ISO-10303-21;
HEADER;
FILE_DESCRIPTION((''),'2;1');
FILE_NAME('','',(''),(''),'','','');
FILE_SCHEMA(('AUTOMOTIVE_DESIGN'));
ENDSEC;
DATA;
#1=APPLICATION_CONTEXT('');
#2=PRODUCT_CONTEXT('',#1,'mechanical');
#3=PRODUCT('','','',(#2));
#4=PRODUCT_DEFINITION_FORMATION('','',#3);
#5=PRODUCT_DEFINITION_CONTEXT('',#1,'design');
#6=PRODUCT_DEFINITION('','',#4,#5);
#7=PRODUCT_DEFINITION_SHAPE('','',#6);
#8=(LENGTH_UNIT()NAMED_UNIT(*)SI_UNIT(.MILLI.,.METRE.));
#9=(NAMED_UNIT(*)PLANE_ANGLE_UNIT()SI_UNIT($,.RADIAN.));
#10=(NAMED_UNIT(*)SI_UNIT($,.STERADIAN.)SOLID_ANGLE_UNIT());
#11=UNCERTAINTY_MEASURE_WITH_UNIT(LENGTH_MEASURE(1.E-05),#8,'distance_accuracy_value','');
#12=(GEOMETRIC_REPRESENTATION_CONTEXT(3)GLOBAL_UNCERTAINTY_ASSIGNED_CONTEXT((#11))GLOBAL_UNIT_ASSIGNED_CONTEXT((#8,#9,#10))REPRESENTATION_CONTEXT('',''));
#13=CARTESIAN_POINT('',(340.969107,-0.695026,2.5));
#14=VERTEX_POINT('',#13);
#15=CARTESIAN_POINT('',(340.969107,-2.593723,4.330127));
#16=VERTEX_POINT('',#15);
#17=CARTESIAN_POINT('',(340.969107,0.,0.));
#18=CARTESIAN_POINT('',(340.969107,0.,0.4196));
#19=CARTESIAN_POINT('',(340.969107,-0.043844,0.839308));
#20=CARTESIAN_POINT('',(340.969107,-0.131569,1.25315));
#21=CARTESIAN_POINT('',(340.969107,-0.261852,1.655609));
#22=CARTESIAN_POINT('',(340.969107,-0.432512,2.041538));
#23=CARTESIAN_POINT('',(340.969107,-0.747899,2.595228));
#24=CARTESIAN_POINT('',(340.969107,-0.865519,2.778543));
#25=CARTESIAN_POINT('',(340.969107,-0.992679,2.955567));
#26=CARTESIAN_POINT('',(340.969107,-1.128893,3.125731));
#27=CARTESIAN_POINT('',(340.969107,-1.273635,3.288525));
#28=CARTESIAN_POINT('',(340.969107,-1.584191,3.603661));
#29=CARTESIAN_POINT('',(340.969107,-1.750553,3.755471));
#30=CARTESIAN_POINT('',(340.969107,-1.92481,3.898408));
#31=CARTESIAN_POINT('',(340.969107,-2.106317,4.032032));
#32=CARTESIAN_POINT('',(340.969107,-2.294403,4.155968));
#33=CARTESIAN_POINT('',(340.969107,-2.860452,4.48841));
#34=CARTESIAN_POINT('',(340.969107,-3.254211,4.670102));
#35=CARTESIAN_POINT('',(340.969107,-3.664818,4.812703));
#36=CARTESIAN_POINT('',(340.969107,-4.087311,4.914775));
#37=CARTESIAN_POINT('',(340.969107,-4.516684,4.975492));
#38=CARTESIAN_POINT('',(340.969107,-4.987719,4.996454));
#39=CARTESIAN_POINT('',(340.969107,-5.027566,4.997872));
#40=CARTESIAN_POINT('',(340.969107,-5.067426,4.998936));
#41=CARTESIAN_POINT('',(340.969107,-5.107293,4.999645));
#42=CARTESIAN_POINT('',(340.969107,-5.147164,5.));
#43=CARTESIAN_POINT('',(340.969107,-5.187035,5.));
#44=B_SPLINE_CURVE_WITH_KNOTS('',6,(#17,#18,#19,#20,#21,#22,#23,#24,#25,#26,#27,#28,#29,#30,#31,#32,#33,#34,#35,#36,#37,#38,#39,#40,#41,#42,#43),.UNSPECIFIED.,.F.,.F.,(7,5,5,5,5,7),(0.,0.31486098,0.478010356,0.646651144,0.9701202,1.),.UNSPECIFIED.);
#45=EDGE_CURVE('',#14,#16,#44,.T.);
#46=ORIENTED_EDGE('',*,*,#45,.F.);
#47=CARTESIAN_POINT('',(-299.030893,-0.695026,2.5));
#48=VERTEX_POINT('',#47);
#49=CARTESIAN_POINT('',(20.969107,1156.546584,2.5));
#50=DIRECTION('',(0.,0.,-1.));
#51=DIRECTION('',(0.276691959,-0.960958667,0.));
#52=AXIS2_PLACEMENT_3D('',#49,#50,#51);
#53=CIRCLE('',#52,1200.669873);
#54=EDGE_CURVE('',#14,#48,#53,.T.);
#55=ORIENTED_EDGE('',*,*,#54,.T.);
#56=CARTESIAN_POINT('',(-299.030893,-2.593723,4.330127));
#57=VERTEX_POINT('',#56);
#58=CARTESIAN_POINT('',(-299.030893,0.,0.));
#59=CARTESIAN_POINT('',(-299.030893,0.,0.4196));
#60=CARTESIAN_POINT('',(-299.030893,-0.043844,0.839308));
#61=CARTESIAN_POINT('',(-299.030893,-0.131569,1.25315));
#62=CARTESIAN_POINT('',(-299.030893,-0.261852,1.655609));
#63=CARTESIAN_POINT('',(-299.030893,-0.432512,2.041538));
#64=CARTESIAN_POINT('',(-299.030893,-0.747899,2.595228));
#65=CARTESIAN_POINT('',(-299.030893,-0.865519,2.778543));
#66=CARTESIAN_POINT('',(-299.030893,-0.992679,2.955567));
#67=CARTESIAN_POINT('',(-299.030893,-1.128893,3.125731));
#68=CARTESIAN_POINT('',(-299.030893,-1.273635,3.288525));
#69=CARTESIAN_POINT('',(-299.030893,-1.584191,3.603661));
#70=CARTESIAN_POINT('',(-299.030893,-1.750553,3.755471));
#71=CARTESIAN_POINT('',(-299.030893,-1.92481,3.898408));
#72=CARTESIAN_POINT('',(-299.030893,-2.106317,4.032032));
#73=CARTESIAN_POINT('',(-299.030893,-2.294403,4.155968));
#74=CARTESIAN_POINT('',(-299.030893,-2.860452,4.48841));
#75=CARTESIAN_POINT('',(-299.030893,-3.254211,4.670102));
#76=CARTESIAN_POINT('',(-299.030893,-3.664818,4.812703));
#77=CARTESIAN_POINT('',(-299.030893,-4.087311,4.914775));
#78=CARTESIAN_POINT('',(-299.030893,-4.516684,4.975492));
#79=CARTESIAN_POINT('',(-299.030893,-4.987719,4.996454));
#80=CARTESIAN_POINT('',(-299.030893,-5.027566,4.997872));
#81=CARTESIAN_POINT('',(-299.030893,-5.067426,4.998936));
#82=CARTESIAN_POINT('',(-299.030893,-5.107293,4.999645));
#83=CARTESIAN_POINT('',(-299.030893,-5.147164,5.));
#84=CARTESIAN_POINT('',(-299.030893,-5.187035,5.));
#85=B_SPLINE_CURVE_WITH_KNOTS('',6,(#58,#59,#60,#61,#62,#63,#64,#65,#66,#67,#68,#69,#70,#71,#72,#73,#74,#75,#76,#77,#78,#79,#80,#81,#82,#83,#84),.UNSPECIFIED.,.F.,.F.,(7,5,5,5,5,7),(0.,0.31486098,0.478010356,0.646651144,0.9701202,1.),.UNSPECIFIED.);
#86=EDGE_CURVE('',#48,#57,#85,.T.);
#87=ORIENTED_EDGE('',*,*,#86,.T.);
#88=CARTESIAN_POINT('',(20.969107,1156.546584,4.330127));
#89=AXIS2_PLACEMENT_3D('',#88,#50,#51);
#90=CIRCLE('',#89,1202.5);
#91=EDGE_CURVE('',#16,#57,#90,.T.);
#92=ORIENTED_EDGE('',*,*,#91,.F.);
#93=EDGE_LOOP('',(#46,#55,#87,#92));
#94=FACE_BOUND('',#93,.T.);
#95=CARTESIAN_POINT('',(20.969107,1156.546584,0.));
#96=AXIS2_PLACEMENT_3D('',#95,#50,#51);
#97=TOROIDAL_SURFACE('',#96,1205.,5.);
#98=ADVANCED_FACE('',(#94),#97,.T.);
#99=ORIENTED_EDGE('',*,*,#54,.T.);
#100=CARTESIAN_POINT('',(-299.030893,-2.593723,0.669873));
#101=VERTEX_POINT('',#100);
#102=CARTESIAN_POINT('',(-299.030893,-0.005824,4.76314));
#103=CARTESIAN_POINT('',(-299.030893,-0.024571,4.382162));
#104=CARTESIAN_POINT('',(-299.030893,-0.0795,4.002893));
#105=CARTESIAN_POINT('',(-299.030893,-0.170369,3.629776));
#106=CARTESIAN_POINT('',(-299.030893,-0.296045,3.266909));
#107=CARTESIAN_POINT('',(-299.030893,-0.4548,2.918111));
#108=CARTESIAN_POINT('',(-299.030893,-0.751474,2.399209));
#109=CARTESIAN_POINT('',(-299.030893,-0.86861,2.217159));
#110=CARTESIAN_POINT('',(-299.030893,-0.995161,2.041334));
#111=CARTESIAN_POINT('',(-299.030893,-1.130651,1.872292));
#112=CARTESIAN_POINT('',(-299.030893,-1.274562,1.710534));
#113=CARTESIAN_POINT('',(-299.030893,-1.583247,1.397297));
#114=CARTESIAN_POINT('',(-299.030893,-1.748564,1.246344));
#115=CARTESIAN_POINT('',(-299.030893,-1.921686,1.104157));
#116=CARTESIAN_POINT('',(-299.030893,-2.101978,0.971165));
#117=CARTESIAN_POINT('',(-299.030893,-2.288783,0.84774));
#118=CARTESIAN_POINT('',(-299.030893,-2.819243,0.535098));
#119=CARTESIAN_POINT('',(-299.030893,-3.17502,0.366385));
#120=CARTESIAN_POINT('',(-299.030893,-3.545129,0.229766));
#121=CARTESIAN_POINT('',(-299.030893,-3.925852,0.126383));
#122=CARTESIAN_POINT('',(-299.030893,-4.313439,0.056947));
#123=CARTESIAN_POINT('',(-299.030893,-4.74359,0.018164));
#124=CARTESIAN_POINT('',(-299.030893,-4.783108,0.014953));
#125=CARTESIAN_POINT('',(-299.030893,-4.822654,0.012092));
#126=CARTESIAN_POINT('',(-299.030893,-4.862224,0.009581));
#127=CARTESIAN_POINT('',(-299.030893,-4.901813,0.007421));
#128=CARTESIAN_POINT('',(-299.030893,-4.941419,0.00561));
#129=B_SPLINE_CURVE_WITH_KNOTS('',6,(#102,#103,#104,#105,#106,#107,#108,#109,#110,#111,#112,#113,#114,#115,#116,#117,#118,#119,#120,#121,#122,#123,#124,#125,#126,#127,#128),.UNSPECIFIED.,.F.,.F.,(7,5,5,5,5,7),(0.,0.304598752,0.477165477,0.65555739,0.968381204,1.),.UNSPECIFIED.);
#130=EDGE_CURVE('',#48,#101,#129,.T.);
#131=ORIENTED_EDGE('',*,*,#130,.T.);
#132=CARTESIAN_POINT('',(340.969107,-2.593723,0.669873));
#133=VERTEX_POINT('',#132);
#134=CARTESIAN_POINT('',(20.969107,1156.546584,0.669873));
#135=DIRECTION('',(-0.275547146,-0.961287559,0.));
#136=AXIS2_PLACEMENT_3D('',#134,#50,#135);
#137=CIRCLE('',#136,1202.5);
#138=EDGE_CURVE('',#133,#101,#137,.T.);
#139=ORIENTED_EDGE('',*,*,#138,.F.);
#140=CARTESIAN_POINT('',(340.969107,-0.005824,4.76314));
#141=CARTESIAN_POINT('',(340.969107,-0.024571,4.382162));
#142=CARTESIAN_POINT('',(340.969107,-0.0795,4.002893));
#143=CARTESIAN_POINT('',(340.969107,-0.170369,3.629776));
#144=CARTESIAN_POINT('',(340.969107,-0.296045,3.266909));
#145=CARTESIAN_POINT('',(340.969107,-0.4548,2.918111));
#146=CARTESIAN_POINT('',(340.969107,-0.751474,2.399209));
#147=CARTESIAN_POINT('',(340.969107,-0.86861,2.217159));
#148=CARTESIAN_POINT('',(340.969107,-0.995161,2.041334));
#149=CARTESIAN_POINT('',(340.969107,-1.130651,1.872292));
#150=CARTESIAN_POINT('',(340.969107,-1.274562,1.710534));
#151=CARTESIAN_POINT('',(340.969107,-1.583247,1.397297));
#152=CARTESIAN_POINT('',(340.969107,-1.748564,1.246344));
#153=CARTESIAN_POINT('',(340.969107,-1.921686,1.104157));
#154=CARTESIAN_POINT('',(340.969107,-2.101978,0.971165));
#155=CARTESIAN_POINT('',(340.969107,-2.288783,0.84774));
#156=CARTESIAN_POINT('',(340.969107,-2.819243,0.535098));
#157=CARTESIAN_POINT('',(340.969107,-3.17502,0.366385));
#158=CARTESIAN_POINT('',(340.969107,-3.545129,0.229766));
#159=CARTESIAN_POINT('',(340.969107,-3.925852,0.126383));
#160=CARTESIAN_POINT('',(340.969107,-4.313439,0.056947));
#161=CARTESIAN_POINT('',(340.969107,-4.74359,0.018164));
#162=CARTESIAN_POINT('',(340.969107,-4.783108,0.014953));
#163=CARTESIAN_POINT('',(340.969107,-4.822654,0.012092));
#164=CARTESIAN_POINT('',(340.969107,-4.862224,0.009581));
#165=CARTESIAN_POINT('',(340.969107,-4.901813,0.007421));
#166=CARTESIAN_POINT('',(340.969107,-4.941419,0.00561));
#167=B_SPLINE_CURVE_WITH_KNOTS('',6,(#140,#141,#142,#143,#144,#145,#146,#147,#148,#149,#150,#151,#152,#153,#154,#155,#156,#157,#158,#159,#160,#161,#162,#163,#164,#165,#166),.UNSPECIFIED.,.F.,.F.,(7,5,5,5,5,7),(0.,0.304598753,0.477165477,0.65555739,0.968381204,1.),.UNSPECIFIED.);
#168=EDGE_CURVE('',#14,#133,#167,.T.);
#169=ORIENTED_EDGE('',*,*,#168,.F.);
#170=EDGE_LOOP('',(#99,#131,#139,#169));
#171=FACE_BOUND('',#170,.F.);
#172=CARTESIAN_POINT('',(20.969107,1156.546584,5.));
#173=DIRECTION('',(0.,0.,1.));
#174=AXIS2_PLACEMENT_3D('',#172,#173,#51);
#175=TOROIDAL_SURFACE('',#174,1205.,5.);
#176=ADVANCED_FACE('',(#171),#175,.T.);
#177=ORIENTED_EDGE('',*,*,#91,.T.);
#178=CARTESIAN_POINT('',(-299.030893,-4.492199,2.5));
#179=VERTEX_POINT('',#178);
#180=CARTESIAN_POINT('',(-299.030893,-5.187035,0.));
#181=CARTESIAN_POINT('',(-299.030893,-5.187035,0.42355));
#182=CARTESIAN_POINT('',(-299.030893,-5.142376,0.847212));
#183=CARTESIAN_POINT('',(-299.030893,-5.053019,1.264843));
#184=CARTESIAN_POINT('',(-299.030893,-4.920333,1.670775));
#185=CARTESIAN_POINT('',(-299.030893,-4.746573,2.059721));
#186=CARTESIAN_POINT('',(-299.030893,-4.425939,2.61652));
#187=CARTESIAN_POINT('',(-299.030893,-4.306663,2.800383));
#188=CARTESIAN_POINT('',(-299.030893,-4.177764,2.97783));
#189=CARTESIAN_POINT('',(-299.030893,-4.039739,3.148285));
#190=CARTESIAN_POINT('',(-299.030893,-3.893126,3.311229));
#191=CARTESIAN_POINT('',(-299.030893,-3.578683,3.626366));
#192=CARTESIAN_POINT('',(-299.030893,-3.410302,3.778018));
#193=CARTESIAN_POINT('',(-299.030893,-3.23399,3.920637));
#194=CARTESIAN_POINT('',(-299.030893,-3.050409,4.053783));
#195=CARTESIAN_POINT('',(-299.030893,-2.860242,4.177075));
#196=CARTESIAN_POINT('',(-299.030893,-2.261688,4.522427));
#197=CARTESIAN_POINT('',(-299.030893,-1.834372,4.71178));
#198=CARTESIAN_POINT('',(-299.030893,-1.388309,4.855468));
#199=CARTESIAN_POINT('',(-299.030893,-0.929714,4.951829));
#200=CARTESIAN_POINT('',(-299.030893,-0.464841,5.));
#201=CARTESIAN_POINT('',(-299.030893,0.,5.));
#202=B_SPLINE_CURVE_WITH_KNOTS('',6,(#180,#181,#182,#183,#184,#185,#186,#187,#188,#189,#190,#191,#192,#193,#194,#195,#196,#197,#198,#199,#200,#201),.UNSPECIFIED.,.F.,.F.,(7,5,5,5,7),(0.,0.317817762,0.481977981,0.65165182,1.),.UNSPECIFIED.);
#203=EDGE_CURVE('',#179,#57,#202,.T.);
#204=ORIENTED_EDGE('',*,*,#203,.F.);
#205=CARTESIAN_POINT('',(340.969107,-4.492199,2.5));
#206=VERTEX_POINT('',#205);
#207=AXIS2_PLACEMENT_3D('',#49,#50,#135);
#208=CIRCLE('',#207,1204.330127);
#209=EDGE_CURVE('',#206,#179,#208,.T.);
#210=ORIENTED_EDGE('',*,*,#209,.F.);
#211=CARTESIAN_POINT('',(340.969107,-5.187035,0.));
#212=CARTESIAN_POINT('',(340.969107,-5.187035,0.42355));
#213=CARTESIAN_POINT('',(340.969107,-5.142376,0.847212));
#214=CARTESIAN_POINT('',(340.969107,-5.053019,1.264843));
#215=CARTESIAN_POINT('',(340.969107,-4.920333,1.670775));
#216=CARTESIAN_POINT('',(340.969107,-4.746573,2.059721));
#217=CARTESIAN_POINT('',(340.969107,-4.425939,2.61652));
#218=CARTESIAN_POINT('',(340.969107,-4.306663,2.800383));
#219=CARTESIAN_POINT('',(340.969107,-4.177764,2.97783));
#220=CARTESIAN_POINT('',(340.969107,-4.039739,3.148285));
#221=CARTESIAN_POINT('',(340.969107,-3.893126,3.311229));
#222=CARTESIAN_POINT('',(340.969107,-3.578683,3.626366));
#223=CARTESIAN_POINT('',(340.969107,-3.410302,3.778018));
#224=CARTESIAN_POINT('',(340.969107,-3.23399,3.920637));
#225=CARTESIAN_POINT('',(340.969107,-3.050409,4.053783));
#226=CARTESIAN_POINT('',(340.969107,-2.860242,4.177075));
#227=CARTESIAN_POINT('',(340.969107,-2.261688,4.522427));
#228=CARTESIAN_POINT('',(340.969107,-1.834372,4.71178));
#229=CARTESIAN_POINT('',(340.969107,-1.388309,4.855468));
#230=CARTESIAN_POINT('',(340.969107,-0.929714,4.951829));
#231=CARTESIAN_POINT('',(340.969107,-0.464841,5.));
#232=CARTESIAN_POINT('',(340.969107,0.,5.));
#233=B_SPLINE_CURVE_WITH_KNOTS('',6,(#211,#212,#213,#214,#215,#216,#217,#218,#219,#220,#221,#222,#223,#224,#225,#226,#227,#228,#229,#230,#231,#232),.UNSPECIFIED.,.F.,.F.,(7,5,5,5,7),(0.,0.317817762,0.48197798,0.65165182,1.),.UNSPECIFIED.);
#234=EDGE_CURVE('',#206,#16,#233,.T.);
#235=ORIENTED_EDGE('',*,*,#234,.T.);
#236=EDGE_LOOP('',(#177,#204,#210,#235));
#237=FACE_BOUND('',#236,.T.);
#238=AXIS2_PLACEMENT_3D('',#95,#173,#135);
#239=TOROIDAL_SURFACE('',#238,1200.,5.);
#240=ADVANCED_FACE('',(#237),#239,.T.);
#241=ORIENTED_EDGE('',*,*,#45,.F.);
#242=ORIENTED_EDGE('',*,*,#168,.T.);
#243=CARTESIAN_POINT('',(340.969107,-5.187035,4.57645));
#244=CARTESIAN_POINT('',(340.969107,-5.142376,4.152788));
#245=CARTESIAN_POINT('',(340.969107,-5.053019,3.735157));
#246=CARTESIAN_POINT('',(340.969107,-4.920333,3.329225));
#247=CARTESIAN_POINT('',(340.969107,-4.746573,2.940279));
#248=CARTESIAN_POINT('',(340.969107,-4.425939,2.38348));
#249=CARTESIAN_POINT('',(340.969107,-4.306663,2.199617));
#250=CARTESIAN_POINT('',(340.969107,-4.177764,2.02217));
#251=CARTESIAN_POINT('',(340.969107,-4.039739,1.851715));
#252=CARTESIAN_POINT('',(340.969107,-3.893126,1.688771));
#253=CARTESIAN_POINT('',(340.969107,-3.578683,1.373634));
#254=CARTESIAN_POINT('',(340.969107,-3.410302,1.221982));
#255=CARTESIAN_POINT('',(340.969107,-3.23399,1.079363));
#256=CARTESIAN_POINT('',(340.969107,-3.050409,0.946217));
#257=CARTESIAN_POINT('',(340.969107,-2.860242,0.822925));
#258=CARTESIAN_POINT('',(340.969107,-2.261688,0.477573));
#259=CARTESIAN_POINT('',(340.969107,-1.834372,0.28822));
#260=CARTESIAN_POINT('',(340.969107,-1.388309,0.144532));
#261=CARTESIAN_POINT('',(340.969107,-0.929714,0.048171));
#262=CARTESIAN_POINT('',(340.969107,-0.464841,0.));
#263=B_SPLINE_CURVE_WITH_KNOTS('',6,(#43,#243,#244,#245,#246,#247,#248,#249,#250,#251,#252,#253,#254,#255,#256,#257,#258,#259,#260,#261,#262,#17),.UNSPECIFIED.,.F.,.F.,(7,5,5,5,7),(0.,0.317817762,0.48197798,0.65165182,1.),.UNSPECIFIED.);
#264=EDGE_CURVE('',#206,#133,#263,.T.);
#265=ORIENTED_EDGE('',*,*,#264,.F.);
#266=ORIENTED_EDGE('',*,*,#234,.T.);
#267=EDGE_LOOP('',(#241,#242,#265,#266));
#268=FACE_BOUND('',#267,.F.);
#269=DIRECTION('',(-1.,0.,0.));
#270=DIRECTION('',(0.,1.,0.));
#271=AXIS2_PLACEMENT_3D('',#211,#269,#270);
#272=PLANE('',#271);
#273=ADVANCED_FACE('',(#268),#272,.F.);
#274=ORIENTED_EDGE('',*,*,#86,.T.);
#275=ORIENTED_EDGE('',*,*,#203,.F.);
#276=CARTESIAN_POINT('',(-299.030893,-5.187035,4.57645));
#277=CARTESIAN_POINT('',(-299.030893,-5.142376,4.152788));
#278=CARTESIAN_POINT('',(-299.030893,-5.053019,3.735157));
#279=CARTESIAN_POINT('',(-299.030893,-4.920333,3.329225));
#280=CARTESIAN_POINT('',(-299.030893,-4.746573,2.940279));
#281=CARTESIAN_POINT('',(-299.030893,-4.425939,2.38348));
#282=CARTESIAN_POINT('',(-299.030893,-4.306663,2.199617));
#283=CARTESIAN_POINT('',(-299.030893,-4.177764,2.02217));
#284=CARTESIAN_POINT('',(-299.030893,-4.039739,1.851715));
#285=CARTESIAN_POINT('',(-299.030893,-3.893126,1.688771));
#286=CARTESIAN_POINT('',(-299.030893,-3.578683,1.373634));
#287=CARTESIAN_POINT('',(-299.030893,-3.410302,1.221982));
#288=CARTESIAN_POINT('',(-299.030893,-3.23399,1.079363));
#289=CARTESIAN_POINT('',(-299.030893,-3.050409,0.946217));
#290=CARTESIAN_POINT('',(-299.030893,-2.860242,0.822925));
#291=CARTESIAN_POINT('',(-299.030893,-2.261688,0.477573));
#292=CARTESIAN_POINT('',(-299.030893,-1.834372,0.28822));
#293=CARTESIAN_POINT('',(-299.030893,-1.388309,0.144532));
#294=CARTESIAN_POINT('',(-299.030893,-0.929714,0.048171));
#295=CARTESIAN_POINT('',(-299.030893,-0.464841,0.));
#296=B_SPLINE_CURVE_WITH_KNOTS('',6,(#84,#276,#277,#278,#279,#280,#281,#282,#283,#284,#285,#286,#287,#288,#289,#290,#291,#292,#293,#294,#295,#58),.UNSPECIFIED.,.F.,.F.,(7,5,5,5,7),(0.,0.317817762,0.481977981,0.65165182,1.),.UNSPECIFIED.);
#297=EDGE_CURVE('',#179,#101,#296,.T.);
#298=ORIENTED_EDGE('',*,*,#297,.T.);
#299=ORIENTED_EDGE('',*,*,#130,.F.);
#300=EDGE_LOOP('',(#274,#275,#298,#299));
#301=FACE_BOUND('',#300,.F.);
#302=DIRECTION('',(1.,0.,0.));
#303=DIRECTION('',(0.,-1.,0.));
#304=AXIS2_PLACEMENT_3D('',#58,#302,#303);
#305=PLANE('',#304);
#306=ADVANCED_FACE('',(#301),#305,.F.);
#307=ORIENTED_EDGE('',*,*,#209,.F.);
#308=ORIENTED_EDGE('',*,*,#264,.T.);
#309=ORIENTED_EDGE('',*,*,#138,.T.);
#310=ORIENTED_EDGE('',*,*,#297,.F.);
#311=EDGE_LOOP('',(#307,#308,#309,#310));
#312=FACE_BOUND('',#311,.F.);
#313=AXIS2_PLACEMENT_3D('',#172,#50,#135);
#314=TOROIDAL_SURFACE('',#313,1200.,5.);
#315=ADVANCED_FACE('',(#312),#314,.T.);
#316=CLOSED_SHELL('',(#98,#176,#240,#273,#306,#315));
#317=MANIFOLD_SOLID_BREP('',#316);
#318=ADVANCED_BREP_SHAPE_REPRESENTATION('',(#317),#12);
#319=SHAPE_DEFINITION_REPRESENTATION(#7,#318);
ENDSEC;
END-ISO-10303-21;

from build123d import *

# Parameters (mm, degrees)
F1_DEPTH    = 5
F2_T2_ANGLE = 31.9892462311
F2_T4_ANGLE = 32.125738606
F2_T6_ANGLE = 31.9892462311
F2_T8_ANGLE = 32.125738606


# Not quite as in the source:
# - a fillet or chamfer that OpenCascade refuses, or shapes differently, is made with other operations: its cross-section is extruded or revolved along the edge and cut away or added


with BuildPart() as f1:
    # F0 (on Top) → F1 (new body)
    with BuildSketch(Plane.XY):
        with BuildLine():
            ThreePointArc((340.9691074047, 0), (20.9691074047, -43.4534164159), (-299.0308925953, 0))
            Line((-299.0308925953, 0), (-299.0308925953, -5.187034764))
            ThreePointArc((-299.0308925953, -5.187034764), (20.9691074047, -48.4534164159), (340.9691074047, -5.187034764))
            Line((340.9691074047, -5.187034764), (340.9691074047, 0))
        make_face()
    extrude(amount=F1_DEPTH)

    # F2: fillet of radius 5 on 4 edges, made by hand

    # F2_s1 → F2_t2 (revolve, cut)
    with BuildSketch(Plane(origin=(-286.9691065764, 82.2579232266, 0), x_dir=(0, 0, 1), z_dir=(-0.9612875587, 0.2755471456, 0))):
        with BuildLine():
            ThreePointArc((5, -87.4481804397), (1.4644660941, -85.9837143456), (0, -82.4481804397))
            Line((0, -82.4481804397), (0, -87.4481804397))
            Line((0, -87.4481804397), (5, -87.4481804397))
        make_face()
    revolve(axis=Axis((20.9691074047, 1156.5465835841, 0), (0, 0, 1)), revolution_arc=F2_T2_ANGLE, mode=Mode.SUBTRACT)

    # F2_s3 → F2_t4 (revolve, cut)
    with BuildSketch(Plane(origin=(326.8773802338, 94.1188689208, 0), x_dir=(0, 0, 1), z_dir=(0.960958667, 0.2766919594, 0))):
        with BuildLine():
            ThreePointArc((0, 94.4085201712), (3.5355339059, 95.8729862653), (5, 99.4085201712))
            Line((5, 99.4085201712), (5, 94.4085201712))
            Line((5, 94.4085201712), (0, 94.4085201712))
        make_face()
    revolve(axis=Axis((20.9691074047, 1156.5465835841, 5), (0, 0, -1)), revolution_arc=F2_T4_ANGLE, mode=Mode.SUBTRACT)

    # F2_s5 → F2_t6 (revolve, cut)
    with BuildSketch(Plane(origin=(-286.9691065764, 82.2579232266, 0), x_dir=(0, 0, 1), z_dir=(-0.9612875587, 0.2755471456, 0))):
        with BuildLine():
            ThreePointArc((0, -87.4481804397), (3.5355339059, -85.9837143456), (5, -82.4481804397))
            Line((5, -82.4481804397), (5, -87.4481804397))
            Line((5, -87.4481804397), (0, -87.4481804397))
        make_face()
    revolve(axis=Axis((20.9691074047, 1156.5465835841, 5), (0, 0, 1)), revolution_arc=F2_T6_ANGLE, mode=Mode.SUBTRACT)

    # F2_s7 → F2_t8 (revolve, cut)
    with BuildSketch(Plane(origin=(326.8773802338, 94.1188689208, 0), x_dir=(0, 0, 1), z_dir=(0.960958667, 0.2766919594, 0))):
        with BuildLine():
            ThreePointArc((5, 94.4085201712), (1.4644660941, 95.8729862653), (0, 99.4085201712))
            Line((0, 99.4085201712), (0, 94.4085201712))
            Line((0, 94.4085201712), (5, 94.4085201712))
        make_face()
    revolve(axis=Axis((20.9691074047, 1156.5465835841, 0), (0, 0, -1)), revolution_arc=F2_T8_ANGLE, mode=Mode.SUBTRACT)


solid = f1.part
